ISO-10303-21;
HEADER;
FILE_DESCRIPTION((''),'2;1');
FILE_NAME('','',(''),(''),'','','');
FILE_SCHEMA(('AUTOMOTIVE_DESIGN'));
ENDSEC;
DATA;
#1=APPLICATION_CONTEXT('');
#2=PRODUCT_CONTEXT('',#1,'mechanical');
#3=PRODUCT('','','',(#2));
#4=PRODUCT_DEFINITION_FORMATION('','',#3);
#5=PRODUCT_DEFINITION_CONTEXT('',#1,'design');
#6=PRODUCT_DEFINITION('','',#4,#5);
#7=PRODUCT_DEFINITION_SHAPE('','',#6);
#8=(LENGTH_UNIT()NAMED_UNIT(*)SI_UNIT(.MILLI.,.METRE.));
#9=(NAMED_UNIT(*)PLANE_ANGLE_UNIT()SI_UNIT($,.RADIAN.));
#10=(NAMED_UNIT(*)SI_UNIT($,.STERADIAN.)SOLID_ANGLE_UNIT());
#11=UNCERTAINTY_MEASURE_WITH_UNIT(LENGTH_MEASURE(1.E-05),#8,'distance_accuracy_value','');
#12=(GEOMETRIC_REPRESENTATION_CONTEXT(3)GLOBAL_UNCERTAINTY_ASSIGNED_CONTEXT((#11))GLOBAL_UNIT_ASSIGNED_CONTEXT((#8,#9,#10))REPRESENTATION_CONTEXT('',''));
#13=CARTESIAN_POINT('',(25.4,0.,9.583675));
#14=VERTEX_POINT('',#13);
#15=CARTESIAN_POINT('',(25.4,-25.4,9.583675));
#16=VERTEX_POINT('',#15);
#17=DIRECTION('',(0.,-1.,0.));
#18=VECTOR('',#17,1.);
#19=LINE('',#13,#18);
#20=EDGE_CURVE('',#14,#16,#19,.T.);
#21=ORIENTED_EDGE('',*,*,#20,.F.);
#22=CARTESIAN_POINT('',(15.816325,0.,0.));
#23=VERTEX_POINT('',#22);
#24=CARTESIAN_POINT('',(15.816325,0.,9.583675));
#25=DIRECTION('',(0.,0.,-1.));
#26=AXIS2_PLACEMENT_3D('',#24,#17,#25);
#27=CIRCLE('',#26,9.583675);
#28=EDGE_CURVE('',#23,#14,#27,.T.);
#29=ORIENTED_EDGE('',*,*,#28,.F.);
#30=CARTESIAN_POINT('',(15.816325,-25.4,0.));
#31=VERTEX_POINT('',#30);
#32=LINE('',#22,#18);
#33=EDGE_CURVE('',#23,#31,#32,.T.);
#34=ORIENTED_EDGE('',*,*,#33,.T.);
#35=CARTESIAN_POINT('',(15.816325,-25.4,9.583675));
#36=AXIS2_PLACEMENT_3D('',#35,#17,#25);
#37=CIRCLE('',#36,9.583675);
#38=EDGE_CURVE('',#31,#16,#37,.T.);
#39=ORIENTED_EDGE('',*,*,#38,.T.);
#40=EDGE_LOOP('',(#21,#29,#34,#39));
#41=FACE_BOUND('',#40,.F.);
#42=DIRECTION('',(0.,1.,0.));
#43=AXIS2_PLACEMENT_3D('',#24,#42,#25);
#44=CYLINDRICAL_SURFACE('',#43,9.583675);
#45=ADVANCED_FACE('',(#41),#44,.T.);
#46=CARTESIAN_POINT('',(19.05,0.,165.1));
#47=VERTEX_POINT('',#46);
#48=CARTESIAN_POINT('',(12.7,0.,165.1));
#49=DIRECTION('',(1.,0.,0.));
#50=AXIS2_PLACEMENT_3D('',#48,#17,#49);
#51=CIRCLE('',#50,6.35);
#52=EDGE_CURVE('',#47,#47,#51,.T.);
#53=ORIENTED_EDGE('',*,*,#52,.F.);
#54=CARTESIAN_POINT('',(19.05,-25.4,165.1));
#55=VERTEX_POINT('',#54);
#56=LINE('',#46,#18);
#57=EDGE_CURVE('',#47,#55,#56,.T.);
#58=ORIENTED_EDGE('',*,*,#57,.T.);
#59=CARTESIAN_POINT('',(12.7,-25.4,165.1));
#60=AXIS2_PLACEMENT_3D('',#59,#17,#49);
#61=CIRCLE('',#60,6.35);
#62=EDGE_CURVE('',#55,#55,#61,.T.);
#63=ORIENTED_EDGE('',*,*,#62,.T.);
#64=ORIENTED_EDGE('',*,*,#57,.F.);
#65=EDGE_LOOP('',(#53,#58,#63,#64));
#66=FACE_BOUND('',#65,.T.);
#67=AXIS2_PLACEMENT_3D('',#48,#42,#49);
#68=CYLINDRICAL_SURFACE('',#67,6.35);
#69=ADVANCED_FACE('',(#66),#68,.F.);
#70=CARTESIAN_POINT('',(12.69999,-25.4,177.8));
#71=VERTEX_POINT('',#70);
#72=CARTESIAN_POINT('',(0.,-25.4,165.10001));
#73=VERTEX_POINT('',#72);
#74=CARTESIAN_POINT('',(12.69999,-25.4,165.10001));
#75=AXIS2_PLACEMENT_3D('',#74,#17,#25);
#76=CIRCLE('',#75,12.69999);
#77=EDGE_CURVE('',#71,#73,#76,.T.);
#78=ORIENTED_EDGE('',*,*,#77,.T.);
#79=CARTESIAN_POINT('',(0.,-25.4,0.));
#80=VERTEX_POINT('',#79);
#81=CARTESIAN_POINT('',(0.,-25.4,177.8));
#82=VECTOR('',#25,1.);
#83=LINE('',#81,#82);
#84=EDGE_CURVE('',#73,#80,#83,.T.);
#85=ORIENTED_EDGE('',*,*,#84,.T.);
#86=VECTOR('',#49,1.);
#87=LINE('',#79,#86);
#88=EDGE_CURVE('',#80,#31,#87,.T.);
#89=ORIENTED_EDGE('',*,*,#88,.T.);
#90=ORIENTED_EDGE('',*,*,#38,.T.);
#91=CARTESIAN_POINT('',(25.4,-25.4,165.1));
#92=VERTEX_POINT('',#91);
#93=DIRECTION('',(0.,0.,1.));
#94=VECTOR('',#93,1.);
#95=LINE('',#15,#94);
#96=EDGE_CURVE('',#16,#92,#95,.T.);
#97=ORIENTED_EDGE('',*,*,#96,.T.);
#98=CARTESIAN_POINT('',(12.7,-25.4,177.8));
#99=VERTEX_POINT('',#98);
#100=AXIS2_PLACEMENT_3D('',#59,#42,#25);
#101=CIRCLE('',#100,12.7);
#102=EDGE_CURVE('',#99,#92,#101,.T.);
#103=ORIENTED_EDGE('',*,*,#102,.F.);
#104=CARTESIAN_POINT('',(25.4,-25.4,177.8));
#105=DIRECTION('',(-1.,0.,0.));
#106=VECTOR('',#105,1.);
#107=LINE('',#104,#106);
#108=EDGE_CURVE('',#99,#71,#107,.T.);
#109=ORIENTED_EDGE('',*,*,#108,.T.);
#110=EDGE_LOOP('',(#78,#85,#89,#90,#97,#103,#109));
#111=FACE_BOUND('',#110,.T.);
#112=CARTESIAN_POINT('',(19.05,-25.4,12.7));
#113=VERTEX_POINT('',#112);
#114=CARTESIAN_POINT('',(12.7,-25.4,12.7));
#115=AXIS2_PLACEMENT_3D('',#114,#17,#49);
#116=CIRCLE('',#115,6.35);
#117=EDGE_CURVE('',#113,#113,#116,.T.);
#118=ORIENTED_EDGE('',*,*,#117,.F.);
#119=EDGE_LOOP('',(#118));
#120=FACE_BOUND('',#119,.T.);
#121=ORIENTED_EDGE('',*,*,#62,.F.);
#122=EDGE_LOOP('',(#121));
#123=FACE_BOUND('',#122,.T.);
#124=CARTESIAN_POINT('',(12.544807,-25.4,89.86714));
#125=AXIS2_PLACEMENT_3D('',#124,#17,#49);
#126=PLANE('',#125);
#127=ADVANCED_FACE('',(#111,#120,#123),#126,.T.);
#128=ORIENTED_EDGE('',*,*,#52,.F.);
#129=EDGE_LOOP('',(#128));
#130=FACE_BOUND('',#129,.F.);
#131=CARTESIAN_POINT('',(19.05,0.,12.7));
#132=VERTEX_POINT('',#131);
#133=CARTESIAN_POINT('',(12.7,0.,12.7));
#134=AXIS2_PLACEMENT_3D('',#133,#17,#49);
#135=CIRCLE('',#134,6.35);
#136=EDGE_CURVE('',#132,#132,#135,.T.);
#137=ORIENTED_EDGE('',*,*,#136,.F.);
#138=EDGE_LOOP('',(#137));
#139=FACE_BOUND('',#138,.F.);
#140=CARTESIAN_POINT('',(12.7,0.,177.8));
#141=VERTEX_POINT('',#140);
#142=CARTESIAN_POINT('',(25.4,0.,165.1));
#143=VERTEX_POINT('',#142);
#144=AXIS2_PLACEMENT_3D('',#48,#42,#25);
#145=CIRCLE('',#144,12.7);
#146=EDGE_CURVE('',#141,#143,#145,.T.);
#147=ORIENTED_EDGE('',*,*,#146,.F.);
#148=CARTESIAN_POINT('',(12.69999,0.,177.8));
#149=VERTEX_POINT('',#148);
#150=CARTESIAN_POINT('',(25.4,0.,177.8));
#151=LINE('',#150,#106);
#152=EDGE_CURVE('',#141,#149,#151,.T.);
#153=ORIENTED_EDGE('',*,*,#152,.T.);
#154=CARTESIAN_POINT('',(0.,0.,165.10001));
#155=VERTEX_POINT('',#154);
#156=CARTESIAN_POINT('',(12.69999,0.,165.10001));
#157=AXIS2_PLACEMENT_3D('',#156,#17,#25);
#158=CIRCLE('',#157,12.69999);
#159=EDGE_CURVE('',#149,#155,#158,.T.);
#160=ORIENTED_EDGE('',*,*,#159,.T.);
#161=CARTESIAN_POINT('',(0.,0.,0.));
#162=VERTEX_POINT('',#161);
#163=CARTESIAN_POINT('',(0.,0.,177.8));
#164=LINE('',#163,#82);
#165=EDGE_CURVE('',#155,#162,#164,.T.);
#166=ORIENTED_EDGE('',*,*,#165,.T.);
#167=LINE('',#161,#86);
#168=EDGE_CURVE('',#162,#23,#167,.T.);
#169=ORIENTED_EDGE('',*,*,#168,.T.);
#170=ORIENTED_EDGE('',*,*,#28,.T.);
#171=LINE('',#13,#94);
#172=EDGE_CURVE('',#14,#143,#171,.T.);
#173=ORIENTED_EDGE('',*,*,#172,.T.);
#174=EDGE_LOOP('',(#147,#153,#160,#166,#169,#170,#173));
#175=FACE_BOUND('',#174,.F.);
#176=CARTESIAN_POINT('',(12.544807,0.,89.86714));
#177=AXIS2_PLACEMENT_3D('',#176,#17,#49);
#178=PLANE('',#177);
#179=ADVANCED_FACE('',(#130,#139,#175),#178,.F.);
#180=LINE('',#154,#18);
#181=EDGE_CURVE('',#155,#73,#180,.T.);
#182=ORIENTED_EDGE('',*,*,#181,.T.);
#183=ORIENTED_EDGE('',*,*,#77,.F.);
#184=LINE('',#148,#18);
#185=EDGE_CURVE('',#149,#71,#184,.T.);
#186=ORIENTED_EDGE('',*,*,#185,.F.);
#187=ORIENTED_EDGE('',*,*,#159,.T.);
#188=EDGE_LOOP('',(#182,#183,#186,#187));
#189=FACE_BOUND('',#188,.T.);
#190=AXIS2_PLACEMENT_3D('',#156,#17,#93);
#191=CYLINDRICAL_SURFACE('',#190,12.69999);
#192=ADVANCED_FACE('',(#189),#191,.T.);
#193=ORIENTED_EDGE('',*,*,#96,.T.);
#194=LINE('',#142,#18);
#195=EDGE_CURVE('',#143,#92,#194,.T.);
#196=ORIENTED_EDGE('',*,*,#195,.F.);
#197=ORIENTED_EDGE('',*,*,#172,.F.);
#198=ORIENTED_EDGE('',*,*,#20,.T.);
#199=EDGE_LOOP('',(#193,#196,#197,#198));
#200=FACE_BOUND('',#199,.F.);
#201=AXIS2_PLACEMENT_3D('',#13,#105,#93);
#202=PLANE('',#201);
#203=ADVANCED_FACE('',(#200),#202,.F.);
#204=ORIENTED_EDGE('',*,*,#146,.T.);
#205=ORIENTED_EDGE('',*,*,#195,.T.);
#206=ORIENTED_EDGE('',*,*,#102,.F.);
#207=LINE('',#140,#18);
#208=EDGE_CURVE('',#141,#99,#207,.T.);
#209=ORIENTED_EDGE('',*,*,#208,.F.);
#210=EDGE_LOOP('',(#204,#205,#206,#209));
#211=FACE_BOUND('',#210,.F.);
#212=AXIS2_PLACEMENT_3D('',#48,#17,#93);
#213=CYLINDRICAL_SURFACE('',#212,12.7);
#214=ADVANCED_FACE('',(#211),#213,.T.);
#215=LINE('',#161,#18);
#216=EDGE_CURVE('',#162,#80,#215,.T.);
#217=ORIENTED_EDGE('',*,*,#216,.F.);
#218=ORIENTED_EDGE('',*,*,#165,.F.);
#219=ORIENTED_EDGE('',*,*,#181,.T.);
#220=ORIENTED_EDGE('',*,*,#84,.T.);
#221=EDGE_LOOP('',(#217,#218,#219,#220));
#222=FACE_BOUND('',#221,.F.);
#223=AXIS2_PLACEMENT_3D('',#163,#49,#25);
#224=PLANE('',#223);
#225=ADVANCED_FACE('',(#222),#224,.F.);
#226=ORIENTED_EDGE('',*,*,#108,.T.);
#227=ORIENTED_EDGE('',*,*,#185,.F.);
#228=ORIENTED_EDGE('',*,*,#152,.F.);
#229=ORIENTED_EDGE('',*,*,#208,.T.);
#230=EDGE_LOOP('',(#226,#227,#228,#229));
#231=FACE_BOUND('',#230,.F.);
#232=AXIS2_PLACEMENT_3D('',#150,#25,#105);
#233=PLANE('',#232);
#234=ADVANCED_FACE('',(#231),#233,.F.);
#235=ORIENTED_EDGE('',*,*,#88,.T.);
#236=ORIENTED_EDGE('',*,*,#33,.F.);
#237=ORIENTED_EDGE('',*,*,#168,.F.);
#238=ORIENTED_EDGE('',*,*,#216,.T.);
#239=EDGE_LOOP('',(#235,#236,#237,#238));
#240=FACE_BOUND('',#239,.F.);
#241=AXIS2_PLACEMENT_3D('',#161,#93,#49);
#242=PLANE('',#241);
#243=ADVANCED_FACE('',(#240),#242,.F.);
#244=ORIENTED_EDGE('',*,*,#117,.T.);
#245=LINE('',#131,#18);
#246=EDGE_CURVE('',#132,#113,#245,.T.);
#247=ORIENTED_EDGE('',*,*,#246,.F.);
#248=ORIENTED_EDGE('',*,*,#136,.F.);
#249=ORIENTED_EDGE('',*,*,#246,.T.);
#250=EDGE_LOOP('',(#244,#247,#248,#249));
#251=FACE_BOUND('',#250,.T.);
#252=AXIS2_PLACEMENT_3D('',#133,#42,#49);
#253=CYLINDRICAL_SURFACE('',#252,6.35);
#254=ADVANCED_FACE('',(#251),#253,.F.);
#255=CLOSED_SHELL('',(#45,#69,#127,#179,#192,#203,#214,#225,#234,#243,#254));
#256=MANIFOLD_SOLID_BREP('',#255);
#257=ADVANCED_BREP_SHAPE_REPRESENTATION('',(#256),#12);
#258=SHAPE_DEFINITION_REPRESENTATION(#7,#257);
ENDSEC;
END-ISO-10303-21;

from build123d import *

# Parameters (mm, degrees)
F0_R     = 6.35
F1_DEPTH = 25.4
F2_R     = 12.7
F3_R     = 12.69999


# Not quite as in the source:
# - a fillet or chamfer is up to 0.001 mm smaller than in the source, because OpenCascade refuses the exact size


with BuildPart() as f1:
    # F0 (on Front) → F1 (new body)
    with BuildSketch(Plane.XZ):
        with BuildLine():
            Line((0, 177.8), (0, 0))
            Line((0, 0), (15.8163251287, 0))
            ThreePointArc((15.8163251287, 0), (22.5930066189, 2.8069933811), (25.4, 9.5836748713))
            Line((25.4, 9.5836748713), (25.4, 177.8))
            Line((25.4, 177.8), (0, 177.8))
        make_face()
        with Locations((12.7, 12.7)):
            Circle(F0_R, mode=Mode.SUBTRACT)
        with Locations((12.7, 165.1)):
            Circle(F0_R, mode=Mode.SUBTRACT)
    extrude(amount=F1_DEPTH)

    # F2
    f2_edges = [f1.edges().sort_by_distance(p)[0] for p in [
        (25.4, -12.7, 177.8),
    ]]
    fillet(f2_edges, radius=F2_R)

    # F3 (radius 12.7 in the source; OpenCascade refuses exactly that, so slightly less here)
    f3_edges = [f1.edges().sort_by_distance(p)[0] for p in [
        (0, -12.7, 177.8),
    ]]
    fillet(f3_edges, radius=F3_R)


solid = f1.part
